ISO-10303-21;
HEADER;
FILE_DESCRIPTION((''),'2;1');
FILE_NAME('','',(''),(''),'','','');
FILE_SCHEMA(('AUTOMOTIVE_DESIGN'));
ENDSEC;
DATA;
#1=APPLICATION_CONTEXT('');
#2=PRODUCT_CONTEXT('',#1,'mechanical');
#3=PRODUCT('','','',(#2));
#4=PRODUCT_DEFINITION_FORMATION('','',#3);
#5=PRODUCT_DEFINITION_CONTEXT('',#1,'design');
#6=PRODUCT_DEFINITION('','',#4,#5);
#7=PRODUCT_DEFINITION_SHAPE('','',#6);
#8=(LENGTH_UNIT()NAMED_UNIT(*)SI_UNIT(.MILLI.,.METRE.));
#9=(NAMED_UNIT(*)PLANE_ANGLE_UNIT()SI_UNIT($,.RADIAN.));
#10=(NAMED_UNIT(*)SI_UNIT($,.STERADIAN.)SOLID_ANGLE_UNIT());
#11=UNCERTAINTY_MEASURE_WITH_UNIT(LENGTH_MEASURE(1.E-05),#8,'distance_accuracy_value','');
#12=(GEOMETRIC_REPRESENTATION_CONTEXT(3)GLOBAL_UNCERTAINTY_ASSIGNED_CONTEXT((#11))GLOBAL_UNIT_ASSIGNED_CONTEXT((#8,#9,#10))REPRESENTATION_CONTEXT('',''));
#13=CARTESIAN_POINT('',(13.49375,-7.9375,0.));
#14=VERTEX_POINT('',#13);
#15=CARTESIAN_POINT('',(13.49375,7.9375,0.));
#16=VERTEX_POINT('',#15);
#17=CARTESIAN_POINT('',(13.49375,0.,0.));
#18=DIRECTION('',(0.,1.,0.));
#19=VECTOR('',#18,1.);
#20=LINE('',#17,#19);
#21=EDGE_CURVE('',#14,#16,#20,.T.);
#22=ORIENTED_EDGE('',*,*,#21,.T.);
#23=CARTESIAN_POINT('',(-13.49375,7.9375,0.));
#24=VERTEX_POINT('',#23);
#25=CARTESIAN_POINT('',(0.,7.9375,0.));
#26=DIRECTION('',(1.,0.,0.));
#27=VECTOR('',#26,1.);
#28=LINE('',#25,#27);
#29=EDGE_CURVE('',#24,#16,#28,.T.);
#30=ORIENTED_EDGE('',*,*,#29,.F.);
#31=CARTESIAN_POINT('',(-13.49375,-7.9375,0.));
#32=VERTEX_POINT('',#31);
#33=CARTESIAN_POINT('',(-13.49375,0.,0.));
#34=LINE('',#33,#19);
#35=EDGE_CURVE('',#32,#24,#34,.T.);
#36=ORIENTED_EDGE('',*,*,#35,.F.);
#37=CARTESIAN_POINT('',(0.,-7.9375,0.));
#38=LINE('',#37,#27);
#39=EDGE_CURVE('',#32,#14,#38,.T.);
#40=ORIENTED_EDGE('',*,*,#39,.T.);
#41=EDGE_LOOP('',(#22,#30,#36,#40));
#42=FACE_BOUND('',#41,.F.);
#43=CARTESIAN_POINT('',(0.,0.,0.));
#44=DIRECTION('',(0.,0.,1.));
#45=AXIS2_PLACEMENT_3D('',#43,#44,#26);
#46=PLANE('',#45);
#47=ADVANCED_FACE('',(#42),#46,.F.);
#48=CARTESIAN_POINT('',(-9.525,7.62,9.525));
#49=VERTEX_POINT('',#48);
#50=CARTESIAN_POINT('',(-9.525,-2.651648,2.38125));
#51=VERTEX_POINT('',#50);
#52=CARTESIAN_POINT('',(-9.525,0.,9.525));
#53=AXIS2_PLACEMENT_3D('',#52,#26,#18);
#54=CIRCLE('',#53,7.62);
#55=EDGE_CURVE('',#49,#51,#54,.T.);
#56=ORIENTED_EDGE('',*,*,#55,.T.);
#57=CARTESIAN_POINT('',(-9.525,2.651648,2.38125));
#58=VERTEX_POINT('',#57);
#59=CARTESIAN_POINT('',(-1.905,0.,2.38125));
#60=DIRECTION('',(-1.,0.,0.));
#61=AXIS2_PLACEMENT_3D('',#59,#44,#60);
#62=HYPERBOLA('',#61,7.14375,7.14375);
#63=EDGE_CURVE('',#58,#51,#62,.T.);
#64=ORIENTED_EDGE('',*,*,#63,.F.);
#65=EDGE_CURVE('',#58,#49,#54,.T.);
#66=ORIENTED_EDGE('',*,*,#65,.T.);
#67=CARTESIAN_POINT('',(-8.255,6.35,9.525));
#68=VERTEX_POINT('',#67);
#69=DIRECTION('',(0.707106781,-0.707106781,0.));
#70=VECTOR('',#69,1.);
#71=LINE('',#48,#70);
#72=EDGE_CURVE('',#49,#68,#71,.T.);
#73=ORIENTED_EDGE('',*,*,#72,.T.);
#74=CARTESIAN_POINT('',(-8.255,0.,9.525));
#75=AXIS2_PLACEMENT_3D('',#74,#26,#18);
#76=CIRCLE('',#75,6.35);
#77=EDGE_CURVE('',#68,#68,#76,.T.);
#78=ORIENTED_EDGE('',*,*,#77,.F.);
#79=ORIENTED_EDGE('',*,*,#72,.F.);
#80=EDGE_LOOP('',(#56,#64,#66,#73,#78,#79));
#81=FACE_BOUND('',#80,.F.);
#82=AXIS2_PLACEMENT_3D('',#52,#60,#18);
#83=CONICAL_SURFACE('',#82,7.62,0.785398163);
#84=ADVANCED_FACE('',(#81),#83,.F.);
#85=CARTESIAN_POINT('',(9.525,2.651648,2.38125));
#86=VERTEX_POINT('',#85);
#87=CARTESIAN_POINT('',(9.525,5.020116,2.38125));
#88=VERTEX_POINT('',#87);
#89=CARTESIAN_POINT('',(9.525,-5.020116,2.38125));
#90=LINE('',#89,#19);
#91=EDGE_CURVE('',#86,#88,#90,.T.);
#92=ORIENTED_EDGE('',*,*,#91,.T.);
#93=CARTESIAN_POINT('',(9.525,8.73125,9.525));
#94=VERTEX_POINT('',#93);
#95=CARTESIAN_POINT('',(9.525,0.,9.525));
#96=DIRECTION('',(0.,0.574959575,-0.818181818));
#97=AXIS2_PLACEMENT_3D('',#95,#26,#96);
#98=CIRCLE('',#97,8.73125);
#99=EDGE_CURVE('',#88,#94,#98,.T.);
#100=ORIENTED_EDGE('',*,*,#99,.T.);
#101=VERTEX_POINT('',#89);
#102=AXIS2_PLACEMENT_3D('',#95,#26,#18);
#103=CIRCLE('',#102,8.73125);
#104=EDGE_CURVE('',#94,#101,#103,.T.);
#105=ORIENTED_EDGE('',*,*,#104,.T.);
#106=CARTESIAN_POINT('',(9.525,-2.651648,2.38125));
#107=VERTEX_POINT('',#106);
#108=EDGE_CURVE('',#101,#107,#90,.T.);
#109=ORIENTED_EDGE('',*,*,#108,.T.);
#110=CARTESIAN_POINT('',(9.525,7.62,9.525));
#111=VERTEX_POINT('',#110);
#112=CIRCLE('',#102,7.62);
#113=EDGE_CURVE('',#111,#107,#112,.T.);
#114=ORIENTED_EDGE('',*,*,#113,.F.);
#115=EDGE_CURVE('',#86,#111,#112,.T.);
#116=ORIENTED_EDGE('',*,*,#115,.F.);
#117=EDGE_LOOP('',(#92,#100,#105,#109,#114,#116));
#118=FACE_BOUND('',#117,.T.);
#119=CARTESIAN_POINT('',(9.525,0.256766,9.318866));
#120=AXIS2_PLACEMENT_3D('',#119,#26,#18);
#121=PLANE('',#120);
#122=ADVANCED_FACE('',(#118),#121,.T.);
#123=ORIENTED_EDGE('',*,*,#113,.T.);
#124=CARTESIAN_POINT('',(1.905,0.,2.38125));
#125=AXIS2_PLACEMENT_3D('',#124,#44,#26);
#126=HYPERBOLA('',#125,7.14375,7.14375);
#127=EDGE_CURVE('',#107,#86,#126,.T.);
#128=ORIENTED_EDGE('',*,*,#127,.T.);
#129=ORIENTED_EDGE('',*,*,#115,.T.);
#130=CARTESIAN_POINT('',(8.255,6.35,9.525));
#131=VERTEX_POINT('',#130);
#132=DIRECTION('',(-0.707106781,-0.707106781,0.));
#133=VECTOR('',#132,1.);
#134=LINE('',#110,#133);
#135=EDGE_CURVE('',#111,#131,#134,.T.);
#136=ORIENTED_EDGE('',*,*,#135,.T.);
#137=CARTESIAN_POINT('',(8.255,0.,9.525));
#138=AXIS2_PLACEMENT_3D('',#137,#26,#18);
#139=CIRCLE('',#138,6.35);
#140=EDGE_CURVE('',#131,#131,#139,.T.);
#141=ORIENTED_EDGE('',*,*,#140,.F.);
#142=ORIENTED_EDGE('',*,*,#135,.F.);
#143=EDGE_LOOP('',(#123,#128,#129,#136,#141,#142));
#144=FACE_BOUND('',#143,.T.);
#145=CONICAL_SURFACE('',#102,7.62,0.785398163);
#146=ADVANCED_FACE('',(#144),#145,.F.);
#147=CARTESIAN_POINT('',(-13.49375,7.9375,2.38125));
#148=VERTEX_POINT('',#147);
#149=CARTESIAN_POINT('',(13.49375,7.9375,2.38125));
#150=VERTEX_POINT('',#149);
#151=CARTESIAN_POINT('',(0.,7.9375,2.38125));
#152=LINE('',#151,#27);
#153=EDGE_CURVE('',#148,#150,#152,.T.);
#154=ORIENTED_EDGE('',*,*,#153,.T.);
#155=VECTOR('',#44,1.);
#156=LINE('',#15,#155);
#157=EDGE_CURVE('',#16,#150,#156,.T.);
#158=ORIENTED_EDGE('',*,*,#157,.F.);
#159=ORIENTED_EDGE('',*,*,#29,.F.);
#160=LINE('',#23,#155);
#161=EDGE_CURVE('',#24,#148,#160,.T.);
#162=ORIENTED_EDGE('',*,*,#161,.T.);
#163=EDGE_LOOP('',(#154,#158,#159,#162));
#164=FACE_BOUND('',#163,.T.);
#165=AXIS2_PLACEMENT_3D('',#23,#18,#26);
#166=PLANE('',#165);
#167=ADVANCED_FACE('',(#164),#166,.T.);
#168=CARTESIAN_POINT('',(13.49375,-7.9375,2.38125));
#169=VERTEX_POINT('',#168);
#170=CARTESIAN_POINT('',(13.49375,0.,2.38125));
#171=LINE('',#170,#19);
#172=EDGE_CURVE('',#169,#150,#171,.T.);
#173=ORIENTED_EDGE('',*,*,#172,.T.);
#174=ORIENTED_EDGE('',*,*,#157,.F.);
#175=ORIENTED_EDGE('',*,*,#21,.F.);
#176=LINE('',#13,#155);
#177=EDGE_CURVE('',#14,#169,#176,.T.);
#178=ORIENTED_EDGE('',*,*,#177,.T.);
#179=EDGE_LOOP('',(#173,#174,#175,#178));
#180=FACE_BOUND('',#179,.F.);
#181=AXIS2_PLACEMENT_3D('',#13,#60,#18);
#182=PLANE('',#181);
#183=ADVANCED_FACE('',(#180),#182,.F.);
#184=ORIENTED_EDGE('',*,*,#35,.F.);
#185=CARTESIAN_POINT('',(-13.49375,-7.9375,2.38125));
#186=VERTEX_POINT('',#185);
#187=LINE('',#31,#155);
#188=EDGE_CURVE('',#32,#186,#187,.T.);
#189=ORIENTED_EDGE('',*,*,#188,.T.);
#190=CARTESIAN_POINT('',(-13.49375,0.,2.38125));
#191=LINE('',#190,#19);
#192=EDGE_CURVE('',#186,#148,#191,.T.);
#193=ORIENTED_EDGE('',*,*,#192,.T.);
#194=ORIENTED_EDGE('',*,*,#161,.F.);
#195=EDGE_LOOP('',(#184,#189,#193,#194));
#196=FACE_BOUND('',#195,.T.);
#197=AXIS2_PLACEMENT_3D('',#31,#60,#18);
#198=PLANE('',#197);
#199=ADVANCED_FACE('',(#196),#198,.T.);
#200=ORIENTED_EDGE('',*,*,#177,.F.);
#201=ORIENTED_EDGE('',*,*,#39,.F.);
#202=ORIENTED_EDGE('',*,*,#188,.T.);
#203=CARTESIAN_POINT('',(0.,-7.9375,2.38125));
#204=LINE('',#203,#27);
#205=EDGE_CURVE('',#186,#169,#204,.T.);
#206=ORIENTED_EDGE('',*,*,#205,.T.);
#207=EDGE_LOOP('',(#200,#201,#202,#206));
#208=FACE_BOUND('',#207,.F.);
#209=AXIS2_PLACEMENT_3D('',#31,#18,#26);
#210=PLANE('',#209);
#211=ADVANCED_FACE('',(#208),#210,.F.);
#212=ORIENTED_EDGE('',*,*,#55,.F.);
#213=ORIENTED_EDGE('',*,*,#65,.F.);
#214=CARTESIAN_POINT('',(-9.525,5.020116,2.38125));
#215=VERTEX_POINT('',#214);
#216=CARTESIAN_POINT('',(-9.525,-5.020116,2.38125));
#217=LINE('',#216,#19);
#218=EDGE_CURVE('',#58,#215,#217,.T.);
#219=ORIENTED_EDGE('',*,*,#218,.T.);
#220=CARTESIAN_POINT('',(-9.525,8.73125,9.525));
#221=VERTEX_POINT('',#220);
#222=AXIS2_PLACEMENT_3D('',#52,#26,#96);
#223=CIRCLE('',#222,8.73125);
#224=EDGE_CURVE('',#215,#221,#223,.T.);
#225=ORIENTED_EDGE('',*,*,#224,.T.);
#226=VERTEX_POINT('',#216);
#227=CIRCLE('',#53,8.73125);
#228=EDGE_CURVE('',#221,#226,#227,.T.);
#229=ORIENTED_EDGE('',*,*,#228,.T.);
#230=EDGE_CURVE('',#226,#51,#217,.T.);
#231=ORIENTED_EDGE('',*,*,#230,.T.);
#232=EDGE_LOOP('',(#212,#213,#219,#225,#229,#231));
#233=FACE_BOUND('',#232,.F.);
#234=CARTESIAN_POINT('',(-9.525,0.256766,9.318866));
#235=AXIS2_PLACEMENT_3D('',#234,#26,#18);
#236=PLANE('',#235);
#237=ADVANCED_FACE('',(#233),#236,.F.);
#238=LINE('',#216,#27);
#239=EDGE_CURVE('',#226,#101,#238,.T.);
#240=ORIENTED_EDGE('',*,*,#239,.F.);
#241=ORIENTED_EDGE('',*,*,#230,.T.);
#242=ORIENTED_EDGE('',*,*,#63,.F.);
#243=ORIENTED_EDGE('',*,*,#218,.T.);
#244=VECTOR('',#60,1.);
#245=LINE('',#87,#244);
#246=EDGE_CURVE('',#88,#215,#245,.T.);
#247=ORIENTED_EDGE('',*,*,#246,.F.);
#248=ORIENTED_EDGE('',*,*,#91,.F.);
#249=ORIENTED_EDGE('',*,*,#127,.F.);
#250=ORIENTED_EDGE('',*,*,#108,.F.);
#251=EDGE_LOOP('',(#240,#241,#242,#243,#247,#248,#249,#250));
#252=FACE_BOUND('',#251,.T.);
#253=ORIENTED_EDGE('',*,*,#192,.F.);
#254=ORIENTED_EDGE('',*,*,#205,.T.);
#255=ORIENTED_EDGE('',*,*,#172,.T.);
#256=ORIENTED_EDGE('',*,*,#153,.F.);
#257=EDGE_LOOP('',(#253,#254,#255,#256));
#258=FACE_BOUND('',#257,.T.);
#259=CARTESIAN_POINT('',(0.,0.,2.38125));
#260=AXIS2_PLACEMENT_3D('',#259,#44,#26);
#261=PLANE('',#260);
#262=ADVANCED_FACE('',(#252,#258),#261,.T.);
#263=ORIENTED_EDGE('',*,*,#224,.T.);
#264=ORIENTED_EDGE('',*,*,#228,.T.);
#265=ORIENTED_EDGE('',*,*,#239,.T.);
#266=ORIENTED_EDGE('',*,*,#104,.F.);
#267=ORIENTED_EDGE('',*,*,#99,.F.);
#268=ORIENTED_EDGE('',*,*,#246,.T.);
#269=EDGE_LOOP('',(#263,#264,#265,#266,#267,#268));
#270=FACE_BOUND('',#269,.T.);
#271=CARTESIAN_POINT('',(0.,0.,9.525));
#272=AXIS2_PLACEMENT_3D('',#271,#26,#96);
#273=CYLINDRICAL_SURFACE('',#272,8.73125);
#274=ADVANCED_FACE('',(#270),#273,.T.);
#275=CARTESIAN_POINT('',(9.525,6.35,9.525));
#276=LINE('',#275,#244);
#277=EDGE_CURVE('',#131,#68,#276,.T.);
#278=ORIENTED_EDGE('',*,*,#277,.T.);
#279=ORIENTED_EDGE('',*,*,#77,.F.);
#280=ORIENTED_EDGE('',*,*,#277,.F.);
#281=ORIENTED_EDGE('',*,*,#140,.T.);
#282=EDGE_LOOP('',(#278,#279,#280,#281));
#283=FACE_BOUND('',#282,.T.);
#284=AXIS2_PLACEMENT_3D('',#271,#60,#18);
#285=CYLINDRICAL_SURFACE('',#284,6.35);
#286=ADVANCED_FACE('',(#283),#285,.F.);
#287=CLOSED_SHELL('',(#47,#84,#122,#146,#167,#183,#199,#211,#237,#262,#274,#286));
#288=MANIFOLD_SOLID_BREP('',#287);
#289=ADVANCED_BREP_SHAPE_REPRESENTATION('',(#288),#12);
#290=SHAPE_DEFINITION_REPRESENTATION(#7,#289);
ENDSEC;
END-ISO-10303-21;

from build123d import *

# Parameters (mm, degrees)
F0_W     = 26.9875
F0_H     = 15.875
F1_DEPTH = 2.38125
F2_R     = 6.35
F3_DEPTH = 9.525


# Not quite as in the source:
# - a fillet or chamfer that OpenCascade refuses, or shapes differently, is made with other operations: its cross-section is extruded or revolved along the edge and cut away or added


with BuildPart() as f1:
    # F0 (on Top) → F1 (new body)
    with BuildSketch(Plane.XY):
        Rectangle(F0_W, F0_H)
    extrude(amount=F1_DEPTH)

    # F2 (on Right) → F3 (join, symmetric)
    with BuildSketch(Plane.YZ):
        with BuildLine():
            ThreePointArc((5.0201157855, 2.38125), (7.7481163038, 5.4999012055), (8.73125, 9.525))
            ThreePointArc((8.73125, 9.525), (-4.0250987945, 17.2731163038), (-5.0201157855, 2.38125))
            Line((-5.0201157855, 2.38125), (5.0201157855, 2.38125))
        make_face()
        with Locations((0, 9.525)):
            Circle(F2_R, mode=Mode.SUBTRACT)
    extrude(amount=F3_DEPTH, both=True)

    # F4: chamfer of 1.27 on 2 edges, made by hand


with BuildPart() as f4_tool2:
    # F4_s3 → F4_t4 (revolve)
    with BuildSketch(Plane.XY.offset(9.525)):
        Polygon((9.525, 7.62), (8.255, 6.35), (9.525, 6.35), align=None)
    revolve(axis=Axis((9.525, 0, 9.525), (1, 0, 0)))

    split(bisect_by=Plane.XY.offset(2.38125), keep=Keep.TOP)


with BuildPart() as f1_1:
    add(f1.part)

    # F4_t1: cut F4_tool2
    add(f4_tool2.part, mode=Mode.SUBTRACT)


with BuildPart() as f4_tool7:
    # F4_s8 → F4_t9 (revolve)
    with BuildSketch(Plane.XY.offset(9.525)):
        Polygon((-9.525, 7.62), (-8.255, 6.35), (-9.525, 6.35), align=None)
    revolve(axis=Axis((-9.525, 0, 9.525), (1, 0, 0)))

    split(bisect_by=Plane.XY.offset(2.38125), keep=Keep.TOP)


with BuildPart() as f1_2:
    add(f1_1.part)

    # F4_t6: cut F4_tool7
    add(f4_tool7.part, mode=Mode.SUBTRACT)


solid = f1_2.part
